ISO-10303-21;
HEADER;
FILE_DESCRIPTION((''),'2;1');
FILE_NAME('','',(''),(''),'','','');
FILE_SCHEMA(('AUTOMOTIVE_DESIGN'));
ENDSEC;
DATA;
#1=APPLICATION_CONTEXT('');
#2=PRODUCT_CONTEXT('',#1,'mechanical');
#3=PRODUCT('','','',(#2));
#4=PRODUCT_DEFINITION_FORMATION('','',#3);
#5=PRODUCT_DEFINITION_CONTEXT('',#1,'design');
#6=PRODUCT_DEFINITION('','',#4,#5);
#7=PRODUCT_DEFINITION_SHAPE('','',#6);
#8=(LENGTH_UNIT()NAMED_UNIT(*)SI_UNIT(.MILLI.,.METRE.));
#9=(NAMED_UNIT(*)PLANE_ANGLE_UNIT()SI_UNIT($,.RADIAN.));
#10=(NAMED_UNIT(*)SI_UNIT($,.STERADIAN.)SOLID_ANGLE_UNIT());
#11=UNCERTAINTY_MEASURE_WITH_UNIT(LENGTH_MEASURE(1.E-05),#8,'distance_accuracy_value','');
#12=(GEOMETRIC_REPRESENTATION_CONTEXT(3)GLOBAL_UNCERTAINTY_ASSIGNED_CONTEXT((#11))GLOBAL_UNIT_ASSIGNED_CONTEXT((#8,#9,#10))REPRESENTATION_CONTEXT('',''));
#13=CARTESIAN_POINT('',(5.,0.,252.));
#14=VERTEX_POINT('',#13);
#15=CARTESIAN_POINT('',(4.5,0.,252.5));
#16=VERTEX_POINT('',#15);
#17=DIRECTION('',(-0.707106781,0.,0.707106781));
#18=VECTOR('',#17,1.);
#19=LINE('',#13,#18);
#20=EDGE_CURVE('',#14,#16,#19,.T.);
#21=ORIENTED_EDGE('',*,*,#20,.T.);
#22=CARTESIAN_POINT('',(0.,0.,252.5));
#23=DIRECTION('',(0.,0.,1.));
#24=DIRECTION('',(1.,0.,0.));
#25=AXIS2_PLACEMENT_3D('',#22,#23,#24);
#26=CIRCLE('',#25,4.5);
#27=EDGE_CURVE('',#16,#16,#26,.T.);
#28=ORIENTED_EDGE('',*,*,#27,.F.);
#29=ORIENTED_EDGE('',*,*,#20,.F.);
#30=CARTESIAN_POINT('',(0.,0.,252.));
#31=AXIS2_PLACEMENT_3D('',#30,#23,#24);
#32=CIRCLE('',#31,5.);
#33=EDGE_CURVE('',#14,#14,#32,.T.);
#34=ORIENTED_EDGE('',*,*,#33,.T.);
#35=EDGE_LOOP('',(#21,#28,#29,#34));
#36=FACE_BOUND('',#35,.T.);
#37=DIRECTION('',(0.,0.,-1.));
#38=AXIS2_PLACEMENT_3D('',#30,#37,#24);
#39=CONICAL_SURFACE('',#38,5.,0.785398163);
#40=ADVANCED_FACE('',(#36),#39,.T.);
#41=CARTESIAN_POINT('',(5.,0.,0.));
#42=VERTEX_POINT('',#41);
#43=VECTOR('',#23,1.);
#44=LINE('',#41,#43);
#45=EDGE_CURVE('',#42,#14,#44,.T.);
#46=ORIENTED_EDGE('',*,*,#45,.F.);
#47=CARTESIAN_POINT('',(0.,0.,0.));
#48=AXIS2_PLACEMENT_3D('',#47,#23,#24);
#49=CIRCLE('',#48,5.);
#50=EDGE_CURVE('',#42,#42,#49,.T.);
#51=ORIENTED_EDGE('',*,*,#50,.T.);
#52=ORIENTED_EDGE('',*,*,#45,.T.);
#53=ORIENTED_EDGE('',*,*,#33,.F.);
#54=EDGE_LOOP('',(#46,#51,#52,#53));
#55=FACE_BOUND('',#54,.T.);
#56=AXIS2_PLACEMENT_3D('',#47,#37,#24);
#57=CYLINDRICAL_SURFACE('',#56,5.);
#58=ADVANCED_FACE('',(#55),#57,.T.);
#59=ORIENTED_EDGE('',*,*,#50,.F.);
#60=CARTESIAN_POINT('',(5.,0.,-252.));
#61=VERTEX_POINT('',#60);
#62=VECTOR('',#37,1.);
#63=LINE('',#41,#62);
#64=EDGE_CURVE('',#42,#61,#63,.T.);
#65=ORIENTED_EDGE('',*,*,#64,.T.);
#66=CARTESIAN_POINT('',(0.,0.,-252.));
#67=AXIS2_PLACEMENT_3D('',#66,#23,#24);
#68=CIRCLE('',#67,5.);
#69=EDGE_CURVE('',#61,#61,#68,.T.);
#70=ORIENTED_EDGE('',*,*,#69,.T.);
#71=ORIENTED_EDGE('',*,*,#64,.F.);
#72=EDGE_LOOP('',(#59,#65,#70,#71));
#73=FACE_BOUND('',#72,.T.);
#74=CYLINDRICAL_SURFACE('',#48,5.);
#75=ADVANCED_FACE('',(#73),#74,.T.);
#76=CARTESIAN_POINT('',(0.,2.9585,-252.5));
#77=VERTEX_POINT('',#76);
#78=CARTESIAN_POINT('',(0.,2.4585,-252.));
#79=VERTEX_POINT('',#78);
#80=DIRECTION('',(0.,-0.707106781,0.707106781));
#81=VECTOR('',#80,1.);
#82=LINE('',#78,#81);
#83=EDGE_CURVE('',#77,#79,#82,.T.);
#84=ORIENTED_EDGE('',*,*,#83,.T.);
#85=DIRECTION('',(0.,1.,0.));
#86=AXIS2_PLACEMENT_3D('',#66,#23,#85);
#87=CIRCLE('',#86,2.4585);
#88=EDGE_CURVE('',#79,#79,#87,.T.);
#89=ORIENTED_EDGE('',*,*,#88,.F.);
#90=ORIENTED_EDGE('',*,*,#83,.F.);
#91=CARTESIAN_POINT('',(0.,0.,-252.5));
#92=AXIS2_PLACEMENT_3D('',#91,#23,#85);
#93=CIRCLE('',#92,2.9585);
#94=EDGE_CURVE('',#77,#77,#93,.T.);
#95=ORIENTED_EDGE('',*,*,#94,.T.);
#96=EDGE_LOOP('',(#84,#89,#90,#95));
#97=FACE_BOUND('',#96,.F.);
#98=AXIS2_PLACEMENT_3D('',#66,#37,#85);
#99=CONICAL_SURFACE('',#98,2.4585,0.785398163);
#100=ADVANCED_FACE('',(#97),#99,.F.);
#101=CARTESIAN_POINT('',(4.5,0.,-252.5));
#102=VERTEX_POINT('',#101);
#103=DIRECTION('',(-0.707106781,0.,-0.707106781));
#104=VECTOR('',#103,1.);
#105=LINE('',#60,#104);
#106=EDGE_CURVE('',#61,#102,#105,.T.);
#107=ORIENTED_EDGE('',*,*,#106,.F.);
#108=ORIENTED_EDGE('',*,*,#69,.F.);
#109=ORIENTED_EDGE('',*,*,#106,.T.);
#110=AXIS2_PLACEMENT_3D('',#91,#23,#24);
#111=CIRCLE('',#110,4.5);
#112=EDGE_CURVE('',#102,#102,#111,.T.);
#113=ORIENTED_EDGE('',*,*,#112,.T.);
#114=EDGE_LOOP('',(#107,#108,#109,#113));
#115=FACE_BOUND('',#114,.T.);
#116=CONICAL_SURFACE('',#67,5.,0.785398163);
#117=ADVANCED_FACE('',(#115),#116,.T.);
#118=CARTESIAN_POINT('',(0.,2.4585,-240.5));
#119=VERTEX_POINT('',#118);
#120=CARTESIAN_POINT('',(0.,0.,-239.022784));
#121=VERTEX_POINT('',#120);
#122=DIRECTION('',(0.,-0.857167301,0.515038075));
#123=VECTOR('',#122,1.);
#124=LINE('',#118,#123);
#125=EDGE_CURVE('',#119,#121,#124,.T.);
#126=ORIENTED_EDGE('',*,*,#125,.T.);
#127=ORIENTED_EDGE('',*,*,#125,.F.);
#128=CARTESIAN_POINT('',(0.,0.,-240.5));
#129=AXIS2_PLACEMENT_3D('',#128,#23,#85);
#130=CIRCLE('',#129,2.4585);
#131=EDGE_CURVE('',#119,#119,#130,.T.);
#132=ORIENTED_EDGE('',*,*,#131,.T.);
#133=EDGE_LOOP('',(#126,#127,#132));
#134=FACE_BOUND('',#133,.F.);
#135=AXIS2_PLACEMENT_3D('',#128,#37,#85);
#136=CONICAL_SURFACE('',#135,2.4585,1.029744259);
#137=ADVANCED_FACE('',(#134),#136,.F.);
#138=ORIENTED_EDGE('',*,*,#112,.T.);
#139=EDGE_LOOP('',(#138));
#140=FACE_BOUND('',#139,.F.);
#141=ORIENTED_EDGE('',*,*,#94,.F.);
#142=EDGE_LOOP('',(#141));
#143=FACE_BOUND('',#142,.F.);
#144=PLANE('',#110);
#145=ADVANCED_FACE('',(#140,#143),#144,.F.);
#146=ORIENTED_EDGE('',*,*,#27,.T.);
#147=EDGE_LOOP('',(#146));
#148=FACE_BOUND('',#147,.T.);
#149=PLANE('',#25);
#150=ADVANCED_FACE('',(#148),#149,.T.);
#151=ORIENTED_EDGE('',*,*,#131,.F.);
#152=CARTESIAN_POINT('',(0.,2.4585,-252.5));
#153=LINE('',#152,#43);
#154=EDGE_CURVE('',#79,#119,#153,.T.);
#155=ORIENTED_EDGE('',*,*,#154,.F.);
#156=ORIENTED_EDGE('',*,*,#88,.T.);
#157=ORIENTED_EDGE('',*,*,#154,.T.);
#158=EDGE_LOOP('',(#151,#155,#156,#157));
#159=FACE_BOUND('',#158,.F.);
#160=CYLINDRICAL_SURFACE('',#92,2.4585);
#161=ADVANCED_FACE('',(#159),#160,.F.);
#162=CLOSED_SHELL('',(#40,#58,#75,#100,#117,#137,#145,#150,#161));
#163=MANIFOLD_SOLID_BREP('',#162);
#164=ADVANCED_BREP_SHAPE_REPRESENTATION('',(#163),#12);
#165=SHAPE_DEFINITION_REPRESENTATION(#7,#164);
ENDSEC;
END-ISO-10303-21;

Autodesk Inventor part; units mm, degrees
ref_plane "YZ Plane" through (0, 0, 0) normal (1, 0, 0) x (0, 1, 0)
ref_plane "XZ Plane" through (0, 0, 0) normal (0, 1, 0) x (-1, 0, 0)
ref_plane "XY Plane" through (0, 0, 0) normal (0, 0, 1) x (1, 0, 0)
sketch "Skizze2" plane through (0, 0, 0) normal (0, 0, 1) x (1, 0, 0)
  circle A0 centre (0, 0) radius 5
  dimension "d0" = 10
extrude "Extrusion1" add sketch "Skizze2" along normal mid plane 505
sketch "Skizze3" plane through (0, 0, -252.5) normal (0, 0, -1) x (-1, 0, 0)
  point P0 (0, 0)
  point P1 (0, 0)
hole "Bohrung1" at (0, 0, -252.5) direction (0, 0, 1) diameter 4.917 depth 12 tip angle 118 thread size "M6x1" class "6H" standard "ISO Metric profile"
chamfer "Fasen1" distance 0.5 angle 45 3 edges at (0, -2.4585, -252.5) (-5, 0, -252.5) (-5, 0, 252.5)
equation "\"d0\" = Durchmesser_fuehrungsstab"
equation "\"d1\" = Hoehe_Magazin + Fuehrung_Bodenplatte"
equation "\"d4\" = Tiefe_Bohrung"
equation "\"d10\" = Fase"
equation "\"Durchmesser_fuehrungsstab\" = 10"
equation "\"Hoehe_Magazin\" = 500"
equation "\"Tiefe_Bohrung\" = 10"
equation "\"Fuehrung_Bodenplatte\" = 5"
equation "\"Fase\" = 0.5"
properties part number "TS_Magazin_Fuehrungselement_int"
